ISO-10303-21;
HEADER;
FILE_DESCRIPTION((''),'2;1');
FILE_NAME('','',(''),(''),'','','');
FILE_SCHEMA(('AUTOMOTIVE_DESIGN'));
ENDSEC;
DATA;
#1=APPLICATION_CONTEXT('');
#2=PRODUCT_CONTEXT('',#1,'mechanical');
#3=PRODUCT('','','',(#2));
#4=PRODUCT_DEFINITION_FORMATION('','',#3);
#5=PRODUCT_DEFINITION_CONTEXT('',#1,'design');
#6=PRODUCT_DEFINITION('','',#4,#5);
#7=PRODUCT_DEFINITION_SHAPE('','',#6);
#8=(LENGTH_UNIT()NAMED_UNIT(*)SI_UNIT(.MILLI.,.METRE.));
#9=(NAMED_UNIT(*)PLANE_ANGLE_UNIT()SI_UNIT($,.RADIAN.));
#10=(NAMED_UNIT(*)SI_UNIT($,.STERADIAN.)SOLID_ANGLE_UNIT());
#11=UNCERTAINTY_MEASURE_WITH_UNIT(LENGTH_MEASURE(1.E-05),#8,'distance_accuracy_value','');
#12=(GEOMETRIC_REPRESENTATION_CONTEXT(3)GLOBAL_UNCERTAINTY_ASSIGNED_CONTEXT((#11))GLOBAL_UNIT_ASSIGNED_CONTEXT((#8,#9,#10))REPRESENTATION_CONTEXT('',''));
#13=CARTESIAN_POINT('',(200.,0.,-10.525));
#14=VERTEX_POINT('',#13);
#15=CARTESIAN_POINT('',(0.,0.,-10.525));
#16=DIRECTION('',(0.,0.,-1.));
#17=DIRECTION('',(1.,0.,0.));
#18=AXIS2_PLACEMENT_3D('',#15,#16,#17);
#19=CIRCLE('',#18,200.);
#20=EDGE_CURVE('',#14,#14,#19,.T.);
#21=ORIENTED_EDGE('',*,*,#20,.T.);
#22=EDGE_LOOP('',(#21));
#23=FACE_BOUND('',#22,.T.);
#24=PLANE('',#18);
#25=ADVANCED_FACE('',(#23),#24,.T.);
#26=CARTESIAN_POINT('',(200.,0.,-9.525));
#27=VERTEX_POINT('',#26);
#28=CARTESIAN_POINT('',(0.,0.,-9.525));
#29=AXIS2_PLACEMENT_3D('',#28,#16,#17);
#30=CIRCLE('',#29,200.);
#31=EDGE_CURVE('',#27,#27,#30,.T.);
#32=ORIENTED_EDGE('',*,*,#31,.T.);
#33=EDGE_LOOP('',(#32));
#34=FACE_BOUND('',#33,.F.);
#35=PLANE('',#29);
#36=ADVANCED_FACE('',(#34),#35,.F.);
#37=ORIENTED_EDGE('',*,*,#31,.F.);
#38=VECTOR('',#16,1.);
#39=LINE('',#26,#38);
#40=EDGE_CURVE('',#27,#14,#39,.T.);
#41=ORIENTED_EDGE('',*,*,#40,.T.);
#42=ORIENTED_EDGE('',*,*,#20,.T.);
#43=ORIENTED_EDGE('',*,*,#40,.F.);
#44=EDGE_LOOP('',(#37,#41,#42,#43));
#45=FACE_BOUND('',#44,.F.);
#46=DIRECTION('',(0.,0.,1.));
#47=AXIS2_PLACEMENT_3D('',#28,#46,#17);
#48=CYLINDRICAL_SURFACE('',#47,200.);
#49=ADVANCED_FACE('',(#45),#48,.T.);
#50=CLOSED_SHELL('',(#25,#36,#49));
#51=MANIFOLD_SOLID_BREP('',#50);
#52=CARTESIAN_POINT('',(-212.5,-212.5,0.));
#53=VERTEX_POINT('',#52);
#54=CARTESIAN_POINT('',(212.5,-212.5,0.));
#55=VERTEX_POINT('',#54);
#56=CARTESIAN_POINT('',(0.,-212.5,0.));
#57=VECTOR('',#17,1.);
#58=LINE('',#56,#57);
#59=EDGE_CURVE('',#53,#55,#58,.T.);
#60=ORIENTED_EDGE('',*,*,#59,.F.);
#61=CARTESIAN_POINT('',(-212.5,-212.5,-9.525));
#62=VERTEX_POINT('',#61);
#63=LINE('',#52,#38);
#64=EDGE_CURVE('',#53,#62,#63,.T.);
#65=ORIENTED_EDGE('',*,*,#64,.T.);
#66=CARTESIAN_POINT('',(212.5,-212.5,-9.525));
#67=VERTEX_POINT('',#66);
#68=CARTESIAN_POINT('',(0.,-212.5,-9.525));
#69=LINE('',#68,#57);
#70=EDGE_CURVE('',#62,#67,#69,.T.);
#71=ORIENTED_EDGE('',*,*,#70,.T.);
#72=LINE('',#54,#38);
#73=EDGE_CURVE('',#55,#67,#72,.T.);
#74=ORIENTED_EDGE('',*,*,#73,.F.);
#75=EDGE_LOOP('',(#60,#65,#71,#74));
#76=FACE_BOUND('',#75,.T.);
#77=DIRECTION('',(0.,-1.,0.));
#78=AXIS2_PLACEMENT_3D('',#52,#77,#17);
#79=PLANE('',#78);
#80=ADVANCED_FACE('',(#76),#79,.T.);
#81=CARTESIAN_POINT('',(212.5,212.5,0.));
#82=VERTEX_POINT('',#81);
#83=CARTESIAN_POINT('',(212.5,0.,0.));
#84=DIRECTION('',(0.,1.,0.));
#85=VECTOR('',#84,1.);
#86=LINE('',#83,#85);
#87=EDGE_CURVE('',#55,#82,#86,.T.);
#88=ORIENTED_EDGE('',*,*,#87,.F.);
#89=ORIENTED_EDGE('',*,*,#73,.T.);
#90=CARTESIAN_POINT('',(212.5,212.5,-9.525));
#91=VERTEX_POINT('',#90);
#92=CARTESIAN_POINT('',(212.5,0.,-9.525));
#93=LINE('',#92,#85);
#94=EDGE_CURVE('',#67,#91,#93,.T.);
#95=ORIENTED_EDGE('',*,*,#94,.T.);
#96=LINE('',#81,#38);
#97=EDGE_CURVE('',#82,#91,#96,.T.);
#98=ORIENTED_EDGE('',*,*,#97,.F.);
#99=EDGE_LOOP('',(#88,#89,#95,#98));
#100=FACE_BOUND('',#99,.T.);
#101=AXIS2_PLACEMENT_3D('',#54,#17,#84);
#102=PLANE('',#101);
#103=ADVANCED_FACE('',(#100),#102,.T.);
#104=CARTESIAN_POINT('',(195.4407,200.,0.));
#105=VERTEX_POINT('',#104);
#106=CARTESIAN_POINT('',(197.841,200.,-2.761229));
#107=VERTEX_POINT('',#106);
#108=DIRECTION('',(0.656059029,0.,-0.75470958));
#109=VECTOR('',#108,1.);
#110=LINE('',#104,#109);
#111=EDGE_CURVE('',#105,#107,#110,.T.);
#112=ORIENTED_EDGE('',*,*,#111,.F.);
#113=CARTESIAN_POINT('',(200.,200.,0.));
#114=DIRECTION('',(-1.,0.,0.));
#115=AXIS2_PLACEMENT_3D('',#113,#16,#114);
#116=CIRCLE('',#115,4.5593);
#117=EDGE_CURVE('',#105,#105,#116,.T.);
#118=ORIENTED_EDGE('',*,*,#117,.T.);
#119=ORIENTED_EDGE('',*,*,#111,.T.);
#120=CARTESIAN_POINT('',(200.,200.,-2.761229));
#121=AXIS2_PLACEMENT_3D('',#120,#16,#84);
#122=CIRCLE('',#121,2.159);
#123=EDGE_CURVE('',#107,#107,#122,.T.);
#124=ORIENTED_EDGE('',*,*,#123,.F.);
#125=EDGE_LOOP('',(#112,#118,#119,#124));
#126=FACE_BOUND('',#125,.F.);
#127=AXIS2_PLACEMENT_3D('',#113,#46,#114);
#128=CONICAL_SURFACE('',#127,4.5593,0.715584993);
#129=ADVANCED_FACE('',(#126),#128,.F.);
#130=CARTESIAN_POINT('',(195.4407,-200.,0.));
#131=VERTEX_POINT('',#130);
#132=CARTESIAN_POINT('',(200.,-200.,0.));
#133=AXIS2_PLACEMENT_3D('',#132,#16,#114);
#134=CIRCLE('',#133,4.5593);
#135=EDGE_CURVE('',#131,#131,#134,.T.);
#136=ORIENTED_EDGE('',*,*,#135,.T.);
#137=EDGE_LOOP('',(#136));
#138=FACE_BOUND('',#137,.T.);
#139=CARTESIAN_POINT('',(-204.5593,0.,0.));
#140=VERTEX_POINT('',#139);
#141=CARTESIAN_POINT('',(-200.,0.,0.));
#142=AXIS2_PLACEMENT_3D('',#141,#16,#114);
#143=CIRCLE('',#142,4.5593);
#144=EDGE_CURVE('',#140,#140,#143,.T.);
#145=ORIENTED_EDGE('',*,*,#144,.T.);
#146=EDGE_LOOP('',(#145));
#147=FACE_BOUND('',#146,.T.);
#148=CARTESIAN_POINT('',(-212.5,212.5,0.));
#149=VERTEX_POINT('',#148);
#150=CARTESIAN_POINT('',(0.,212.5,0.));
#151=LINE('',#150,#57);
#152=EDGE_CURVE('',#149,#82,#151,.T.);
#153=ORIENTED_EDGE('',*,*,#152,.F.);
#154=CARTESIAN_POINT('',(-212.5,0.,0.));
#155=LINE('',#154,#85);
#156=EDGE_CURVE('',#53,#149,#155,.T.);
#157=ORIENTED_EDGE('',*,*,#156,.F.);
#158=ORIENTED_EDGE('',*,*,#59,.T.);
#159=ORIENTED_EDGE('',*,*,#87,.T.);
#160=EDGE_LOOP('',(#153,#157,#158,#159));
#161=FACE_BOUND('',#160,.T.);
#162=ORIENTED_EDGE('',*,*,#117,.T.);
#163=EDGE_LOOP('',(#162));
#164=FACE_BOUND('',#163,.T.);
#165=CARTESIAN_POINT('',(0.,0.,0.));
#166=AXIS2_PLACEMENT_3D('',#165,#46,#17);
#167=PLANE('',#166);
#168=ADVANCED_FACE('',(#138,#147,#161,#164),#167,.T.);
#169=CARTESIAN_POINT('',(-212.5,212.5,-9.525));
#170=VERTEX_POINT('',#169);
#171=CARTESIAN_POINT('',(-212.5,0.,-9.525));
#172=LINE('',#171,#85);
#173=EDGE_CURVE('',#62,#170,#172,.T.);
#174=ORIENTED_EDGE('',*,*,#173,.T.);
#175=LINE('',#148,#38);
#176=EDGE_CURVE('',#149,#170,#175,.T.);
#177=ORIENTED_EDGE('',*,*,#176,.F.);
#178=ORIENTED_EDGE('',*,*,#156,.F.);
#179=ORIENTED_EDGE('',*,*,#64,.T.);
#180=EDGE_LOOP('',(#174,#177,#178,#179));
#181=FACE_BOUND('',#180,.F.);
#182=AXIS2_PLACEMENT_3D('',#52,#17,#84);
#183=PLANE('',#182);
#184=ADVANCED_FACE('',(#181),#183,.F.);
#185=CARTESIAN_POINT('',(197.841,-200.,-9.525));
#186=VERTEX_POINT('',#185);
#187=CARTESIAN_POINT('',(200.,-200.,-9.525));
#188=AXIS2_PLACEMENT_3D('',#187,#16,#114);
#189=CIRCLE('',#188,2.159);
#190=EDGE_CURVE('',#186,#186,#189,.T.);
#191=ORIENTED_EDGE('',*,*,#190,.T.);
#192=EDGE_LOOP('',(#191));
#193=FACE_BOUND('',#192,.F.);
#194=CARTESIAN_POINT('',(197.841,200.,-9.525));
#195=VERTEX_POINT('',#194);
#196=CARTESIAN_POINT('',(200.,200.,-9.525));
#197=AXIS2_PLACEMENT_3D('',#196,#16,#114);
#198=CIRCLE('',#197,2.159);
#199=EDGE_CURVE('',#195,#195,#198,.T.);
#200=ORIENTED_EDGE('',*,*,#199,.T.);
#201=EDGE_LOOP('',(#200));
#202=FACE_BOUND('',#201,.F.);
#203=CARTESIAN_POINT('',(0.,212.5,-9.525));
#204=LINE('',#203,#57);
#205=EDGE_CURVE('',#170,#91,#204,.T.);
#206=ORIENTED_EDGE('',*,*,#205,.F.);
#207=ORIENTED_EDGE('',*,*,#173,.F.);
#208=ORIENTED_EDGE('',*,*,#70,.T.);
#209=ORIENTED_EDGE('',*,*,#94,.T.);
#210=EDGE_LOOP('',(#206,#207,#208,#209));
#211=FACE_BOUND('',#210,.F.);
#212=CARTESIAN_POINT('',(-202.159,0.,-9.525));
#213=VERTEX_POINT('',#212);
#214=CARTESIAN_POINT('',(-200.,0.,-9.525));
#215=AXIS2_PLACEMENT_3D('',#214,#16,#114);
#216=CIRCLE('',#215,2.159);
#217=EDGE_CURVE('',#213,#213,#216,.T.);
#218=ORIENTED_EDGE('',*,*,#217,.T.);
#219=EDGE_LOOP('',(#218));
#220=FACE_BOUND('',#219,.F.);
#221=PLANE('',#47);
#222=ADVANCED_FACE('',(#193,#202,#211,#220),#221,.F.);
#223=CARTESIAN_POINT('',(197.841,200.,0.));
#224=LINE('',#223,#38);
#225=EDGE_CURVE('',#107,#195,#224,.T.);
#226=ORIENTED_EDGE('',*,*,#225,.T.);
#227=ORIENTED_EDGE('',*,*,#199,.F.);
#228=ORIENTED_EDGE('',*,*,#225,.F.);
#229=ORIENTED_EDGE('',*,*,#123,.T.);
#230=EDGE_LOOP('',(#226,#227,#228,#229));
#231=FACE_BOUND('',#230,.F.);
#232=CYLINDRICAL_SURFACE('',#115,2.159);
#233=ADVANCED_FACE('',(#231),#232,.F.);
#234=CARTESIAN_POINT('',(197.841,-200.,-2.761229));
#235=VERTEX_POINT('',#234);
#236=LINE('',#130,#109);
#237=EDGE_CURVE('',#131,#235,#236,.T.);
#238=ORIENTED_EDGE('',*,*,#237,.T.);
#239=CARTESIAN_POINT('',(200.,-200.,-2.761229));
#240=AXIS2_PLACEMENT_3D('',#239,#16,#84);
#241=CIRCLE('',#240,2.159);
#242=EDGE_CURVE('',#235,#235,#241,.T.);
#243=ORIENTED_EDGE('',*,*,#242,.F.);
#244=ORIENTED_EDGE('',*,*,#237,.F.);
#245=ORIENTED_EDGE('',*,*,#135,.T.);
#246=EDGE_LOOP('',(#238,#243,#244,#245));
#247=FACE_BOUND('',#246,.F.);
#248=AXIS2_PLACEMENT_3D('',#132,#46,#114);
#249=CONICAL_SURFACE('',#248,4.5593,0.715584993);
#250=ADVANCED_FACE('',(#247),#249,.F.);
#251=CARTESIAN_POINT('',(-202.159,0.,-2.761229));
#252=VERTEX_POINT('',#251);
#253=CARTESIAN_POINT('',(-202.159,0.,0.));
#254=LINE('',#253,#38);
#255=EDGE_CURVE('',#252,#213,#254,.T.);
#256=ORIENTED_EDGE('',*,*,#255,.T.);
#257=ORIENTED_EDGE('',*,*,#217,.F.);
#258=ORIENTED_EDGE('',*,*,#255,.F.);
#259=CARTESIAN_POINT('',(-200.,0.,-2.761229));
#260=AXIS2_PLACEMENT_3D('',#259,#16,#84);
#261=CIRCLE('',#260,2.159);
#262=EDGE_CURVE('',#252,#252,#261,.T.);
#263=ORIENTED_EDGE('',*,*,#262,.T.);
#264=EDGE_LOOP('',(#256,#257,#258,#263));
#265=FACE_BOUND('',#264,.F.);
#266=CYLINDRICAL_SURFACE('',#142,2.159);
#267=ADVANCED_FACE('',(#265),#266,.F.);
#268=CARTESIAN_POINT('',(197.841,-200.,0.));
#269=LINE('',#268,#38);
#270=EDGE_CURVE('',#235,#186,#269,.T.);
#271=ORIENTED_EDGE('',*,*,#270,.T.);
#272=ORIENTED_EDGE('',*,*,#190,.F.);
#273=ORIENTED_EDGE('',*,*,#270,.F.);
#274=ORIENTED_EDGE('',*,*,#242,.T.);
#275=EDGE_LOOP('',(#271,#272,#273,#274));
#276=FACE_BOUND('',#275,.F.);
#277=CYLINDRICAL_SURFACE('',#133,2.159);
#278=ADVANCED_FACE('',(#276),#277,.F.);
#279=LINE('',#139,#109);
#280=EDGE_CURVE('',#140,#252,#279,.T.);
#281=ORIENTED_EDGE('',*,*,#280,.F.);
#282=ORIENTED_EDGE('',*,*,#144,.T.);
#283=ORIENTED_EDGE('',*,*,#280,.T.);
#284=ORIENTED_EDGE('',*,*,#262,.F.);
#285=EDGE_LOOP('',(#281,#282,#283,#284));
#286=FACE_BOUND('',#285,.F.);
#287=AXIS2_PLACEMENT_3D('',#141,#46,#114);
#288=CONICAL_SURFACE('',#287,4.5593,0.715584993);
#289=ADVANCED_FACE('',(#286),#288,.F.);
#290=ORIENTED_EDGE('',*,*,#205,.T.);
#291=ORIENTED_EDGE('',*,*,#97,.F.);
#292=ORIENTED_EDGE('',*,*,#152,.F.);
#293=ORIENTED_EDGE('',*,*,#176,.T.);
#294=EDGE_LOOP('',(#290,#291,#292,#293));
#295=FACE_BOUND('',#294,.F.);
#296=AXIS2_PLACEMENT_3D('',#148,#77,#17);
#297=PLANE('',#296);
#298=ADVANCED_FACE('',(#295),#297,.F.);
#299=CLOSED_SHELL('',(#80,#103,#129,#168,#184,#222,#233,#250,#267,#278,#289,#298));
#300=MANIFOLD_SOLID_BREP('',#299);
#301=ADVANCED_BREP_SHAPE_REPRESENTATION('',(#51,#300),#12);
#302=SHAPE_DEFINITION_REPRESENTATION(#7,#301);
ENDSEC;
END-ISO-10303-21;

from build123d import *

# Parameters (mm, degrees)
F0_W           = 425
F0_H           = 425
F1_DEPTH       = 9.525
F2_R           = 200
F3_DEPTH       = 1
F5_D           = 4.318
F5_CSINK_D     = 9.1186
F5_CSINK_ANGLE = 82


# Not quite as in the source:
# - a length typed as a fraction of an inch, garbled in the dataset ("3 / 203.2 mm" for 3/8 in), is restored


with BuildPart() as f1:
    # F0 (on Top) → F1 (new body)
    with BuildSketch(Plane.XY):
        Rectangle(F0_W, F0_H)
    extrude(amount=-F1_DEPTH)

    # F5 (through all)
    with Locations(Plane.XY):
        with Locations((200, -200), (200, 200), (-200, 0)):
            CounterSinkHole(F5_D / 2, F5_CSINK_D / 2, counter_sink_angle=F5_CSINK_ANGLE)


with BuildPart() as f3:
    # F2 (on face) → F3 (new body)
    with BuildSketch(Plane(origin=(0, 0, -9.525), x_dir=(1, 0, 0), z_dir=(0, 0, -1))):
        Circle(F2_R)
    extrude(amount=F3_DEPTH)


solid = Compound([f1.part, f3.part])
